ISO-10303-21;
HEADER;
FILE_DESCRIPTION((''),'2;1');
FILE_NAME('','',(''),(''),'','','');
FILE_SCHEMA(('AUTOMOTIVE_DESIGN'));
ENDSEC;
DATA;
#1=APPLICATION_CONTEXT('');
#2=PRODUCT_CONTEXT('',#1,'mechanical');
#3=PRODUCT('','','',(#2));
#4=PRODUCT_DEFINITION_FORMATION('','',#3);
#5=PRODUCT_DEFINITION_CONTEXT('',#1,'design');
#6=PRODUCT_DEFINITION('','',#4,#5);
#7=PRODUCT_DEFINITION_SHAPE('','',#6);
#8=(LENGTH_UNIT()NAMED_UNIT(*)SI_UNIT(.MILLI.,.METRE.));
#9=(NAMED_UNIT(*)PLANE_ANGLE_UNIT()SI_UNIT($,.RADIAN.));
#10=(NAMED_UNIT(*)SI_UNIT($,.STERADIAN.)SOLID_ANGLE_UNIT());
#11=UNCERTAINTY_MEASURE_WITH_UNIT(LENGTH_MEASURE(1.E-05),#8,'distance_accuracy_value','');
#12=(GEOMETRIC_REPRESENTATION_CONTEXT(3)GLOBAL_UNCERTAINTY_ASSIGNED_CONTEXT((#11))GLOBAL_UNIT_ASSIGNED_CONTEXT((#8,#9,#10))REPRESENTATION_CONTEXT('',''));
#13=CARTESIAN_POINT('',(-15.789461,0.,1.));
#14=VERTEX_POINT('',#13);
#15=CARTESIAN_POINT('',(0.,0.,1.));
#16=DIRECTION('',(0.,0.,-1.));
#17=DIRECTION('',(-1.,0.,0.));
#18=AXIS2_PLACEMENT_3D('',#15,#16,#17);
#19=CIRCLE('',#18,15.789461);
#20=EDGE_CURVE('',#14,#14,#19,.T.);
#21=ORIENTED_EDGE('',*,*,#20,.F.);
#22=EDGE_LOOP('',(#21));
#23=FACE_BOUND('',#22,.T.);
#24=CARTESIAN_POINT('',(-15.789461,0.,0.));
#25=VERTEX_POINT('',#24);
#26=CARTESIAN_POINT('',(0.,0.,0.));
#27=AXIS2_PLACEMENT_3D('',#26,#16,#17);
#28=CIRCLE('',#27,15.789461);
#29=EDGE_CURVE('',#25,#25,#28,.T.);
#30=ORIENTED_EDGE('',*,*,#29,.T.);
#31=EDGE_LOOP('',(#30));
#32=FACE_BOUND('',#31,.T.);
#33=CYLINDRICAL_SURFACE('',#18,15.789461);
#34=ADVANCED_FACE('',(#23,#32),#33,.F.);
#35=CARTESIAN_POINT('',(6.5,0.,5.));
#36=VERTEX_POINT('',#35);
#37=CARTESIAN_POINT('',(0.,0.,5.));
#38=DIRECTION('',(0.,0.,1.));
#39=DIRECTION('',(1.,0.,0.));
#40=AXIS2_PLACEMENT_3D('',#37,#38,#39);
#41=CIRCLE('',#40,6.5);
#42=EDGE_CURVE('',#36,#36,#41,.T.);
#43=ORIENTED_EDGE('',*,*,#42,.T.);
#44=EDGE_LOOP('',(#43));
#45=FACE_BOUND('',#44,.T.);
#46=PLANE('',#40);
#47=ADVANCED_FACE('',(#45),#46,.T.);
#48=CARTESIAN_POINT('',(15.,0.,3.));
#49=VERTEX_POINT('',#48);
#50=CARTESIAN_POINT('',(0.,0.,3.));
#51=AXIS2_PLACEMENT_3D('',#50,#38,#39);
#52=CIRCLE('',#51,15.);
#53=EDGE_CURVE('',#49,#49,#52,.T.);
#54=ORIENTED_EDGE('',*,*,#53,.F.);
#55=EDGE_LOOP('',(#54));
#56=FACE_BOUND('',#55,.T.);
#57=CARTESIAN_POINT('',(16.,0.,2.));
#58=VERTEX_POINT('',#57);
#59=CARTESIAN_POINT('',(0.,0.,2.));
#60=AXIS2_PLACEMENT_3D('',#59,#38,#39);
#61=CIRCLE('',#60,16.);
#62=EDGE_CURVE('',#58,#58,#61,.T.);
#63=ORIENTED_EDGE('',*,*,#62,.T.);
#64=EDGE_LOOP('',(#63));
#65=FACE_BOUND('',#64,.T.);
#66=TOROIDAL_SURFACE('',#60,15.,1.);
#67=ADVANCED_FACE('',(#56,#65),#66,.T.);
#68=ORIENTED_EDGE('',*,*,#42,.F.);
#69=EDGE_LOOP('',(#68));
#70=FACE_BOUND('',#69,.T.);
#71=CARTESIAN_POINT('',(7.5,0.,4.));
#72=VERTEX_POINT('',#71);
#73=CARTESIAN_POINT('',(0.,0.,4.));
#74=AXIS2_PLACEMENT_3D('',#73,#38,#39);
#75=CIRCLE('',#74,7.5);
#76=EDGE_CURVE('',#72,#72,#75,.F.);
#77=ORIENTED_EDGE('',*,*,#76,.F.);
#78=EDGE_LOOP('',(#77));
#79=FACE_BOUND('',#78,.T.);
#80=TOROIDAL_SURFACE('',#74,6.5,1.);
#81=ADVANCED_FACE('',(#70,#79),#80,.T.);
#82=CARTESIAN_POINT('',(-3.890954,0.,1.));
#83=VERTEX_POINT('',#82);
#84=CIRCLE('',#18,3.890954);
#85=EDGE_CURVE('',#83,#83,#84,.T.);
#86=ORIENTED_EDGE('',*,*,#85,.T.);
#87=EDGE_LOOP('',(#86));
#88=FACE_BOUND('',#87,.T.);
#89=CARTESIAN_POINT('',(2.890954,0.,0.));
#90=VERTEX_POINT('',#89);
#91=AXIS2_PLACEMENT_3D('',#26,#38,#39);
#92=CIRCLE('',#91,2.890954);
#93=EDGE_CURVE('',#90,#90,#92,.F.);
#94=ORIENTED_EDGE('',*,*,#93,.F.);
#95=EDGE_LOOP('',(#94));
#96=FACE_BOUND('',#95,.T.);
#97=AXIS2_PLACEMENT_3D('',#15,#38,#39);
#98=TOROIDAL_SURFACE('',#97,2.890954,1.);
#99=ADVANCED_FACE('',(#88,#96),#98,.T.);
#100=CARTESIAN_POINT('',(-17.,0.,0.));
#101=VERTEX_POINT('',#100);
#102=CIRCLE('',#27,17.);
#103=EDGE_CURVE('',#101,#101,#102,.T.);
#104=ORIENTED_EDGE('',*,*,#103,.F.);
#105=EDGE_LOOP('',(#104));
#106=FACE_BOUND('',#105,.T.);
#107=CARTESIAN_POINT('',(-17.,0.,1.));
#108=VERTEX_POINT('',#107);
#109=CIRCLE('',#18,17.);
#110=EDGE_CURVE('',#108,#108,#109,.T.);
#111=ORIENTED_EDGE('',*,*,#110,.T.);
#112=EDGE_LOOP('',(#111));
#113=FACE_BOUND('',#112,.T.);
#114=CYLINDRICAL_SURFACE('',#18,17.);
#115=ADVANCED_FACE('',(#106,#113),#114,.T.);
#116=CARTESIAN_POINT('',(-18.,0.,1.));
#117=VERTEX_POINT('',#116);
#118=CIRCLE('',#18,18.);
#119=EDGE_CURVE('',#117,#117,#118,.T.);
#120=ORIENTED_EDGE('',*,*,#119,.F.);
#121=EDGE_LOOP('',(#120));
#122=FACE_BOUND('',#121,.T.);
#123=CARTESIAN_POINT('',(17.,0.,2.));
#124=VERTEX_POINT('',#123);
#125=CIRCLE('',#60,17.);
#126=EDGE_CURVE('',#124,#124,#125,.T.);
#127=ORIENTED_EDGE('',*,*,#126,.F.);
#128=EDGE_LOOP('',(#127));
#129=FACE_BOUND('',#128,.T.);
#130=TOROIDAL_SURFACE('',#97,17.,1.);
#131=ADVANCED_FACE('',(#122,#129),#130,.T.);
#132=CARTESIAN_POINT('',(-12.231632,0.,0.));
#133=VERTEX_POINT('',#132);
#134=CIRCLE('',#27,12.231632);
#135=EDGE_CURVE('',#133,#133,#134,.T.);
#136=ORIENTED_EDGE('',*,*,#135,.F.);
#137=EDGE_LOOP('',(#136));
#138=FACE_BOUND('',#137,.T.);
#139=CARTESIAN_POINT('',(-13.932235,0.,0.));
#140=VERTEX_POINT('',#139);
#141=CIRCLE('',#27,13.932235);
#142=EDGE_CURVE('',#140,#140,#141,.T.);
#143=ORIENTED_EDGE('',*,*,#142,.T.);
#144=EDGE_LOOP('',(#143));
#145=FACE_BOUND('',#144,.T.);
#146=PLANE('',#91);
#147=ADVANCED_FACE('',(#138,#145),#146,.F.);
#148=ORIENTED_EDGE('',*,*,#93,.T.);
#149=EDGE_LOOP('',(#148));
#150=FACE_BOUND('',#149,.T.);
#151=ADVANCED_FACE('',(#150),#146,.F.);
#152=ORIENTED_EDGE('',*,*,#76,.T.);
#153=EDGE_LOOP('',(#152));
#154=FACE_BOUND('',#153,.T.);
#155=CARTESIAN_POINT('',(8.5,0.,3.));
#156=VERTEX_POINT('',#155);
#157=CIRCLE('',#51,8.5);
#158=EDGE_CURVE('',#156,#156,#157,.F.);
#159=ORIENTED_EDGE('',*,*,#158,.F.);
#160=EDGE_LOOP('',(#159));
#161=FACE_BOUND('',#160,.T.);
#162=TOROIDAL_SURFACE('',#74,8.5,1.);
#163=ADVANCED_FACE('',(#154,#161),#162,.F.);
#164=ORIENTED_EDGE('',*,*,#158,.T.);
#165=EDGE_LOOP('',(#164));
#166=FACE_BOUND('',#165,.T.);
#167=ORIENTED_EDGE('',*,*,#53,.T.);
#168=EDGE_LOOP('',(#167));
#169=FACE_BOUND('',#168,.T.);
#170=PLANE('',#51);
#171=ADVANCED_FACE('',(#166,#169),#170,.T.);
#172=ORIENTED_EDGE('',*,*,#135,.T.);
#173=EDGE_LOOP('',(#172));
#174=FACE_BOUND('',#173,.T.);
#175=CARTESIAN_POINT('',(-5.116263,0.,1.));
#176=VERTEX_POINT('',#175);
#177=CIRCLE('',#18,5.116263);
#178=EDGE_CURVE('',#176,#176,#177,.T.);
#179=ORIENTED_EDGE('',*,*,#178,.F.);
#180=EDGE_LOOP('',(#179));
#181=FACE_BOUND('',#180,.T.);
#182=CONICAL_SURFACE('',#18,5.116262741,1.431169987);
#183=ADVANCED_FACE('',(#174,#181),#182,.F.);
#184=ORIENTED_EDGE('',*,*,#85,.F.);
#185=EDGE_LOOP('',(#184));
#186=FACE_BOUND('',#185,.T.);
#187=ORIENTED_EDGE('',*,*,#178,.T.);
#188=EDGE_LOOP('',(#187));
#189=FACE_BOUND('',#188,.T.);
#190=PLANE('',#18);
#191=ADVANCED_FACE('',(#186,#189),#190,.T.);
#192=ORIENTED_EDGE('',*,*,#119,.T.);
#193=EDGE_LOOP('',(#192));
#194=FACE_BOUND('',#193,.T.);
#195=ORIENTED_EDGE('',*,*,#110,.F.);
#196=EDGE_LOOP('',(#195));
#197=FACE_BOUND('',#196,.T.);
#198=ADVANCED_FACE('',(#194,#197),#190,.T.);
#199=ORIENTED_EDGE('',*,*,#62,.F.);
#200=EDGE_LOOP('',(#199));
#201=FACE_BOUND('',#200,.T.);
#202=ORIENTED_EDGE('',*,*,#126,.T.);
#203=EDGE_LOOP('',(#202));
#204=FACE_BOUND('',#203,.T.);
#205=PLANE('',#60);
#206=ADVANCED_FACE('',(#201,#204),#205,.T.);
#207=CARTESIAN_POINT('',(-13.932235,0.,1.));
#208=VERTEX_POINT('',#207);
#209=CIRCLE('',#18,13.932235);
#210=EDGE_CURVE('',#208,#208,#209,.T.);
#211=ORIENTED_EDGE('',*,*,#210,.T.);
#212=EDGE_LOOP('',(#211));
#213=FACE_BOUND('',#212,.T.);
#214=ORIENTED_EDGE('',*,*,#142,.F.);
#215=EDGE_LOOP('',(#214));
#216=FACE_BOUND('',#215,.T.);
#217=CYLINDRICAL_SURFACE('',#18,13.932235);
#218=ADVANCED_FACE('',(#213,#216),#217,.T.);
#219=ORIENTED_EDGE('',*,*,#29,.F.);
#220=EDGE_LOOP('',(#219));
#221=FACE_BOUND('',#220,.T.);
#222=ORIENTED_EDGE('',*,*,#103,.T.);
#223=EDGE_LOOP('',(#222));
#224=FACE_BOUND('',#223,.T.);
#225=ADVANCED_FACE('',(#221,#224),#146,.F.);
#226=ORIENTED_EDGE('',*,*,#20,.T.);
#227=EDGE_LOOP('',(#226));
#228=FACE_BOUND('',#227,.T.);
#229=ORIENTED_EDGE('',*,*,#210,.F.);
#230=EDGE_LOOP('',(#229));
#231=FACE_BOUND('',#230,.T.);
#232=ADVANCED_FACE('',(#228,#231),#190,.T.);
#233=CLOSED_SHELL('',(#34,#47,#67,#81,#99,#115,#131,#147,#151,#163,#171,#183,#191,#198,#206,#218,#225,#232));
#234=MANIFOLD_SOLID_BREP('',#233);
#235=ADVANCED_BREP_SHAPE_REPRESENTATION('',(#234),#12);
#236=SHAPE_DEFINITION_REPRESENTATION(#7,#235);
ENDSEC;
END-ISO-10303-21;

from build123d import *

# Parameters (mm, degrees)
SKETCH1_R           = 18
BOSS_EXTRUDE1_DEPTH = 2
SKETCH2_R           = 16
BOSS_EXTRUDE2_DEPTH = 1
SKETCH3_R           = 7.5
BOSS_EXTRUDE3_DEPTH = 2
FILLET2_R           = 1
SKETCH4_R           = 18
SKETCH4_R_2         = 17
CUT_EXTRUDE1_DEPTH  = 1
SKETCH5_R           = 15.789460751
SKETCH5_R_2         = 13.932235083
CUT_EXTRUDE2_DEPTH  = 1
SKETCH6_R           = 12.231632463
SKETCH6_R_2         = 3.890953776
CUT_EXTRUDE3_DEPTH  = 1
FILLET3_R           = 1
CHAMFER1_SIZE       = 7.115369722
CHAMFER1_SIZE_2     = 1


# Some blends are built 0.0001 mm under size
with BuildPart() as part:
    # Sketch1 → Boss-Extrude1 (new body)
    with BuildSketch(Plane.XY):
        Circle(SKETCH1_R)
    extrude(amount=BOSS_EXTRUDE1_DEPTH)

    # Sketch2 → Boss-Extrude2 (add)
    with BuildSketch(Plane.XY.offset(2)):
        Circle(SKETCH2_R)
    extrude(amount=BOSS_EXTRUDE2_DEPTH)

    # Sketch3 → Boss-Extrude3 (add)
    with BuildSketch(Plane.XY.offset(3)):
        Circle(SKETCH3_R)
    extrude(amount=BOSS_EXTRUDE3_DEPTH)

    # Fillet2
    fillet2_edges = [part.edges().sort_by_distance(p)[0] for p in [
        (-7.5, 0, 3),
        (-7.5, 0, 5),
        (-18, 0, 2),
        (-16, 0, 3),
    ]]
    fillet(fillet2_edges, radius=FILLET2_R - 0.0001)  # a hair under: the kernel refuses the full size

    # Sketch4 → Cut-Extrude1 (cut)
    with BuildSketch(Plane(origin=(0, 0, 0), x_dir=(-1, 0, 0), z_dir=(0, 0, -1))):
        Circle(SKETCH4_R)
        Circle(SKETCH4_R_2, mode=Mode.SUBTRACT)
    extrude(amount=-CUT_EXTRUDE1_DEPTH, mode=Mode.SUBTRACT)

    # Sketch5 → Cut-Extrude2 (cut)
    with BuildSketch(Plane(origin=(0, 0, 0), x_dir=(-1, 0, 0), z_dir=(0, 0, -1))):
        Circle(SKETCH5_R)
        Circle(SKETCH5_R_2, mode=Mode.SUBTRACT)
    extrude(amount=-CUT_EXTRUDE2_DEPTH, mode=Mode.SUBTRACT)

    # Sketch6 → Cut-Extrude3 (cut)
    with BuildSketch(Plane(origin=(0, 0, 0), x_dir=(-1, 0, 0), z_dir=(0, 0, -1))):
        Circle(SKETCH6_R)
        Circle(SKETCH6_R_2, mode=Mode.SUBTRACT)
    extrude(amount=-CUT_EXTRUDE3_DEPTH, mode=Mode.SUBTRACT)

    # Fillet3
    fillet3_edges = [part.edges().sort_by_distance(p)[0] for p in [
        (3.890953776, 0, 0),
    ]]
    fillet(fillet3_edges, radius=FILLET3_R - 0.0001)  # a hair under: the kernel refuses the full size

    # Chamfer1
    # the kernel refuses this chamfer: 7.115369722, 1 mm, written as the material it adds along each edge
    with BuildSketch(Plane(origin=(0, 0, 1), x_dir=(-1, 0, 0), z_dir=(0, -1, 0))) as chamfer1_piece_1_section:
        Polygon((12.231632463 - CHAMFER1_SIZE, 0), (12.231632463, CHAMFER1_SIZE_2), (12.231632463, 0), align=None)
    chamfer1_piece_1 = revolve(axis=Axis((0, 0, 1), (0, 0, -1)), mode=Mode.PRIVATE)
    chamfer1_piece_1 = split(chamfer1_piece_1, bisect_by=Plane(origin=(8.54226682, 0, 0), z_dir=(0, 0, 1)), keep=Keep.TOP, mode=Mode.PRIVATE)
    add(chamfer1_piece_1)


solid = part.part
